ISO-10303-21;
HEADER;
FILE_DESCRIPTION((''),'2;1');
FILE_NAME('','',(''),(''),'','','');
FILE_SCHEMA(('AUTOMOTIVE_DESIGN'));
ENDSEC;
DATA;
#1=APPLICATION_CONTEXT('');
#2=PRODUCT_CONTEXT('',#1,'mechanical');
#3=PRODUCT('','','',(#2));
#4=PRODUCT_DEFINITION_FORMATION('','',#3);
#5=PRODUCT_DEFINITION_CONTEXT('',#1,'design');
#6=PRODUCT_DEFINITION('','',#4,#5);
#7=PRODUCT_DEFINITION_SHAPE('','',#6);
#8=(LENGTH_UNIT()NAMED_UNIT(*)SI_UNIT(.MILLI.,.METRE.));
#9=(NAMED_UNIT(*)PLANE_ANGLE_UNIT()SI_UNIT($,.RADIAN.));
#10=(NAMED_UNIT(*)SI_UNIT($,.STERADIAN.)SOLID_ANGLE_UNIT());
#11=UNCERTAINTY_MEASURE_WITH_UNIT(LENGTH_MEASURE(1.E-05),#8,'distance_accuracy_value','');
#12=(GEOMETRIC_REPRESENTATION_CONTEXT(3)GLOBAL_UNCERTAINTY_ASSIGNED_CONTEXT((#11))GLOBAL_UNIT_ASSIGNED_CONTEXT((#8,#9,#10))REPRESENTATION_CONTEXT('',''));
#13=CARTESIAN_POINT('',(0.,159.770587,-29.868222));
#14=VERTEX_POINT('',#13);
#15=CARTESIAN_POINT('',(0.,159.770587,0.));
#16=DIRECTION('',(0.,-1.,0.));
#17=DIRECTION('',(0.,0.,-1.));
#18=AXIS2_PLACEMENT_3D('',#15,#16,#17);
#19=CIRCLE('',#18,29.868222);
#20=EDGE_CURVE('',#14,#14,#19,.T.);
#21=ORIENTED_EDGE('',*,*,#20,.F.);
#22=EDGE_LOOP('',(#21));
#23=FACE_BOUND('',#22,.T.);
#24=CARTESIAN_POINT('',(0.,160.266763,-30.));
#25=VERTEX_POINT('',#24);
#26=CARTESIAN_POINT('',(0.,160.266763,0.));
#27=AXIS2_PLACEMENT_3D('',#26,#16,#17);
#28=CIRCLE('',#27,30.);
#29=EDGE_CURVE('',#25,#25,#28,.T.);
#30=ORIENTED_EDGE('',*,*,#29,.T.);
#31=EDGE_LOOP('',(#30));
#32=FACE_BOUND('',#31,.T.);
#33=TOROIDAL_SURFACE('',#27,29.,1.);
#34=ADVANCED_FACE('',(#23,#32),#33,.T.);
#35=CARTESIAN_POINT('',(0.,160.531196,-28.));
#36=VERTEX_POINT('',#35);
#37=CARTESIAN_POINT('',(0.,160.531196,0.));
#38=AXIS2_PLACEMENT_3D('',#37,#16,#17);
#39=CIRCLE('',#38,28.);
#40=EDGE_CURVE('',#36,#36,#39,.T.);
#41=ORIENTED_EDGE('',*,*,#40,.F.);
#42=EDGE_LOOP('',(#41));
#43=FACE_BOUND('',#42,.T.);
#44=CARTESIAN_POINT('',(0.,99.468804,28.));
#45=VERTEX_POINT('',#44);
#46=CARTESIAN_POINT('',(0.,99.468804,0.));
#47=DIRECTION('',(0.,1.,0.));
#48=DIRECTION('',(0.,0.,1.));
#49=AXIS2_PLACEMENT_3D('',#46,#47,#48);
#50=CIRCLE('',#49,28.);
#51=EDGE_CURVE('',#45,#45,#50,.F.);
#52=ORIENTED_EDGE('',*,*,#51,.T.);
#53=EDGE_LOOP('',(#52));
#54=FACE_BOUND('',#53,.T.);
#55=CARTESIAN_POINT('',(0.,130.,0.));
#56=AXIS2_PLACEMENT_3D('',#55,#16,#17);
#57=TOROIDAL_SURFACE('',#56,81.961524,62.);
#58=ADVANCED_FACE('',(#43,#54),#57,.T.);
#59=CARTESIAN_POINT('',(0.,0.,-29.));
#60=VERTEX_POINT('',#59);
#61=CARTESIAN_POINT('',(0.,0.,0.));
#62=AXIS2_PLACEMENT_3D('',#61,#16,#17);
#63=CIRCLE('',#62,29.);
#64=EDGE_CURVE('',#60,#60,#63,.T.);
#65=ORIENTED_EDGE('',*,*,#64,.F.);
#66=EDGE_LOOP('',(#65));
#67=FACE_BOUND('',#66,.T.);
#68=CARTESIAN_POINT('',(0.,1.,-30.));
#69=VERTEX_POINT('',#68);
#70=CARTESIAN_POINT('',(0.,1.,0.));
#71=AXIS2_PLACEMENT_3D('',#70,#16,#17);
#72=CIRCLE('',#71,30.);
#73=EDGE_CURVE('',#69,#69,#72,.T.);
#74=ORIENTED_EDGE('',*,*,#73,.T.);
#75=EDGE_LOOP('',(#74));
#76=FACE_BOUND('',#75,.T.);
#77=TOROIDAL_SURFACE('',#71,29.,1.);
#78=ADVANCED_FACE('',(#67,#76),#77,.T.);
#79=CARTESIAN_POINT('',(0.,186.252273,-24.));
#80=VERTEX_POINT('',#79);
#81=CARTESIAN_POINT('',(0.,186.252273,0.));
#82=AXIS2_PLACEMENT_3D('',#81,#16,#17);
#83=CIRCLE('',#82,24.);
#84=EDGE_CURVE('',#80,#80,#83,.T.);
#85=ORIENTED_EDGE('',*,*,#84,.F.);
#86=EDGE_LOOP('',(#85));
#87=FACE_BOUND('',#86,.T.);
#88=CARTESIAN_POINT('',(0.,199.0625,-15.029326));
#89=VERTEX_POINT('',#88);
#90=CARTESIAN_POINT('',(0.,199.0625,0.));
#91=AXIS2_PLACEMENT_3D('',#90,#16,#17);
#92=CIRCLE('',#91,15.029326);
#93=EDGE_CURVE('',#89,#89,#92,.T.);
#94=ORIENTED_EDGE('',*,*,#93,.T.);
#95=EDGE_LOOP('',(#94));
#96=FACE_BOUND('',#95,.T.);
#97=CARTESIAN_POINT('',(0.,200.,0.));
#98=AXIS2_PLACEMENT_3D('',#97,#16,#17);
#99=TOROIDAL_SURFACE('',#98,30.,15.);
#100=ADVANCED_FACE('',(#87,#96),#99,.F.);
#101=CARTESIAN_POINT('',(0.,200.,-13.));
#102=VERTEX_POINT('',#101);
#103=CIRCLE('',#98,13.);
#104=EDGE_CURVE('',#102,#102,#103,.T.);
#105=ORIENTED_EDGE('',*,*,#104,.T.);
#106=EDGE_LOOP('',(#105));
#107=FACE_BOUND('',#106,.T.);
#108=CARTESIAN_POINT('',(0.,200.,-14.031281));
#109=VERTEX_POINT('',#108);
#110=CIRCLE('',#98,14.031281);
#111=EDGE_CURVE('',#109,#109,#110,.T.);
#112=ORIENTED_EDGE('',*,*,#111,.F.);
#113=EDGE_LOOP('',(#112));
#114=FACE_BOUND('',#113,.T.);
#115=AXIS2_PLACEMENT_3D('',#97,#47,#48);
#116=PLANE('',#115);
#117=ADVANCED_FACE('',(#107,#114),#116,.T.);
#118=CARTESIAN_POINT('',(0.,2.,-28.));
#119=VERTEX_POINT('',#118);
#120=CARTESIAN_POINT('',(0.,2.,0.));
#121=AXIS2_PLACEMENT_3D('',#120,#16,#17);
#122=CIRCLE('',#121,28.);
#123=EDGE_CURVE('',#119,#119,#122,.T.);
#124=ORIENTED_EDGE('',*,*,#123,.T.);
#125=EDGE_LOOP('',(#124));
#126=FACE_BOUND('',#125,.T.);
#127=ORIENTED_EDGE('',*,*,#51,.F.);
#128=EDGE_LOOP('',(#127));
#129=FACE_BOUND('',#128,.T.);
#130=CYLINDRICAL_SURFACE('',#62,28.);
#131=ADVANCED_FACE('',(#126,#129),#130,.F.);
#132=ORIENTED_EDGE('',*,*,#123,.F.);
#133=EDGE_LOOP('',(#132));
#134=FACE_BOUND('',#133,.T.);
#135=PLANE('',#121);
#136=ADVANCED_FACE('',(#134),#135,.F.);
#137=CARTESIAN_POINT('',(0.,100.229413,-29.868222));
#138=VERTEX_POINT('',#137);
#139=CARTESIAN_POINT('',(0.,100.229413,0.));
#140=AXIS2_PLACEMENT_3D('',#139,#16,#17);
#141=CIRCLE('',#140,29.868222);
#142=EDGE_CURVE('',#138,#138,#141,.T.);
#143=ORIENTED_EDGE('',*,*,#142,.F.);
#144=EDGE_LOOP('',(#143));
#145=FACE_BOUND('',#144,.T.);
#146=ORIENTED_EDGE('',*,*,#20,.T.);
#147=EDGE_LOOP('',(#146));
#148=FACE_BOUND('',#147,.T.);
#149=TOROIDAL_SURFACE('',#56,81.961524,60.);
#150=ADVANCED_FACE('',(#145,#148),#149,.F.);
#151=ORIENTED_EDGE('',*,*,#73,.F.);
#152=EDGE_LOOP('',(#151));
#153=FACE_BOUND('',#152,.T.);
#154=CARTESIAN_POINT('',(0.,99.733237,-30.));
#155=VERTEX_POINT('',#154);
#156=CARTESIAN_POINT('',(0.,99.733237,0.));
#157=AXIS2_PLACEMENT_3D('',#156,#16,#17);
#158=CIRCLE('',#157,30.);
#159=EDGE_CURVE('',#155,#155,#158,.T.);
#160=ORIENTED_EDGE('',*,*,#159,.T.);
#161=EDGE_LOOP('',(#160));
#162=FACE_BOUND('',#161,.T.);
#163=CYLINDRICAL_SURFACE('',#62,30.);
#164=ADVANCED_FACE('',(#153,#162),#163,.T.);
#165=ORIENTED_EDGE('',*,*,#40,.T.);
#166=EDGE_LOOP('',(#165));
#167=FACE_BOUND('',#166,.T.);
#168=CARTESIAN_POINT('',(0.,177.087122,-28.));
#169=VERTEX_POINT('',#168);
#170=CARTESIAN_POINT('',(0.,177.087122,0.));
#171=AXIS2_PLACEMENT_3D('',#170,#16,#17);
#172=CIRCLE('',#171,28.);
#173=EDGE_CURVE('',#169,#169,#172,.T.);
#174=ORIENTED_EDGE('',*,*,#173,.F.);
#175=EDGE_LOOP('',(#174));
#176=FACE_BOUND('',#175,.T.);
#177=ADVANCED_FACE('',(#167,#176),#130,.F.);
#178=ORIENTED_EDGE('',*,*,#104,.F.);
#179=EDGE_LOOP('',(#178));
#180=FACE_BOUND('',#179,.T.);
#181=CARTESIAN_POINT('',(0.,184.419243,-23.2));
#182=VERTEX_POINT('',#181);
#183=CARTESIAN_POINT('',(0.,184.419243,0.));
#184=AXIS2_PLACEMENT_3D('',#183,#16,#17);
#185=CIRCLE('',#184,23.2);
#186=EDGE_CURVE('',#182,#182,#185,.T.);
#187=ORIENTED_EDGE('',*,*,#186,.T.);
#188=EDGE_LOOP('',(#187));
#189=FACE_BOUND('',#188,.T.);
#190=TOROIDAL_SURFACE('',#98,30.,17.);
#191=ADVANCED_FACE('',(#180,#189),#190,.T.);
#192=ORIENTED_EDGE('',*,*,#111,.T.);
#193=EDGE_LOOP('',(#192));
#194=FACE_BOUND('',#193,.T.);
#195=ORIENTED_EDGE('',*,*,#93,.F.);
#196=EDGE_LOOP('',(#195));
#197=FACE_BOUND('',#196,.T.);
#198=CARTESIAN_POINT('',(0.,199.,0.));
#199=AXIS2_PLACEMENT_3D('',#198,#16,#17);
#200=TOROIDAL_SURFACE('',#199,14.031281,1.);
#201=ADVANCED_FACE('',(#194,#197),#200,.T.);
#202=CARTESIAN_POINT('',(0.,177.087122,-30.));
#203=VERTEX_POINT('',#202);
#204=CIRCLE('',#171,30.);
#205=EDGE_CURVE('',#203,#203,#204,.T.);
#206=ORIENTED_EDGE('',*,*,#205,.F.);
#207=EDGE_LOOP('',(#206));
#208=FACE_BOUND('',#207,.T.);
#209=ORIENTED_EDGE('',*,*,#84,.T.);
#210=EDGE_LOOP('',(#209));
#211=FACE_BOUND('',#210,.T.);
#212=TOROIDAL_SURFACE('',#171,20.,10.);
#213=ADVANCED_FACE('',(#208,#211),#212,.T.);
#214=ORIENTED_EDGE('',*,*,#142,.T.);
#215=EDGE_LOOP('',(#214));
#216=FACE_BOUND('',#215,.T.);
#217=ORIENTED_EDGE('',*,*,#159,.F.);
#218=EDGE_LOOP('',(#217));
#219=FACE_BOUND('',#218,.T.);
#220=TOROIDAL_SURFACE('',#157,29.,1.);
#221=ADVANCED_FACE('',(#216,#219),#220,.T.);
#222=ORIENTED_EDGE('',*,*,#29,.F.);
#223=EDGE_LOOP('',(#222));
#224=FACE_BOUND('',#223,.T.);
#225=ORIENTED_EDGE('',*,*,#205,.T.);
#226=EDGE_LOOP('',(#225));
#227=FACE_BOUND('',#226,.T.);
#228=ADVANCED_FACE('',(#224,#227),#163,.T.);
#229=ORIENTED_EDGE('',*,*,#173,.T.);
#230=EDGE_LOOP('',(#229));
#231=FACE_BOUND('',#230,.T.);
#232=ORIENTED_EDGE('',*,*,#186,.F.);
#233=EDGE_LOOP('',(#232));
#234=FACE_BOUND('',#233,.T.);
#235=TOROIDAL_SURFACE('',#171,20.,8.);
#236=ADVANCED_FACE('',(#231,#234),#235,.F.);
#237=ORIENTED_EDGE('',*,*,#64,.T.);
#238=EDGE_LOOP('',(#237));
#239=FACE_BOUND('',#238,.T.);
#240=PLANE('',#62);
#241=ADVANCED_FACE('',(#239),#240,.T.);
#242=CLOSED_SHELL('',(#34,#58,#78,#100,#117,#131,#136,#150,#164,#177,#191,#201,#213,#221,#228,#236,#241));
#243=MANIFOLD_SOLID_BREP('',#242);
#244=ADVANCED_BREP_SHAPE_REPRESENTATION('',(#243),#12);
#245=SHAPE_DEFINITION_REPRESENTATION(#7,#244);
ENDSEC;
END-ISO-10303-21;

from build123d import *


# Read off the part's stored shape, not the designer's step: Shell1
with BuildPart() as part:
    # Sketch1 → Revolve1 (revolve)
    with BuildSketch(Plane(origin=(0, 0, 0), x_dir=(0, 0, -1), z_dir=(1, 0, 0))):
        with BuildLine():
            Line((0, 0), (0, 200))
            Line((0, 200), (14.031280577, 200))
            ThreePointArc((14.031280577, 200), (14.715933774, 199.728868987), (15.029325541, 199.0625))
            ThreePointArc((15.029325541, 199.0625), (17.713105506, 191.395801973), (24, 186.252272915))
            ThreePointArc((24, 186.252272915), (28.366600265, 182.5643471), (30, 177.087121525))
            Line((30, 177.087121525), (30, 160.266763149))
            ThreePointArc((30, 160.266763149), (29.966494105, 160.010074338), (29.868221709, 159.770586704))
            ThreePointArc((29.868221709, 159.770586704), (21.961524227, 130), (29.868221709, 100.229413296))
            ThreePointArc((29.868221709, 100.229413296), (29.966494105, 99.989925662), (30, 99.733236851))
            Line((30, 99.733236851), (30, 1))
            ThreePointArc((30, 1), (29.707106781, 0.292893219), (29, 0))
            Line((29, 0), (0, 0))
        make_face()
    revolve(axis=Axis((0, 0, 0), (0, 1, 0)))

    # Shell1 outline → Shell1 (revolve, cut)
    with BuildSketch(Plane.XY):
        with BuildLine():
            Line((28, 2), (28, 99.468804427))
            ThreePointArc((28, 99.468804427), (19.961524227, 130), (28, 160.531195573))
            Line((28, 160.531195573), (28, 177.087121525))
            ThreePointArc((28, 177.087121525), (26.693280212, 181.468901985), (23.2, 184.419242637))
            ThreePointArc((23.2, 184.419242637), (15.776779549, 190.688716522), (13, 200))
            Line((13, 200), (0, 200))
            Line((0, 200), (0, 2))
            Line((0, 2), (28, 2))
        make_face()
    revolve(axis=Axis((0, 0, 0), (0, 1, 0)), mode=Mode.SUBTRACT)


solid = part.part
